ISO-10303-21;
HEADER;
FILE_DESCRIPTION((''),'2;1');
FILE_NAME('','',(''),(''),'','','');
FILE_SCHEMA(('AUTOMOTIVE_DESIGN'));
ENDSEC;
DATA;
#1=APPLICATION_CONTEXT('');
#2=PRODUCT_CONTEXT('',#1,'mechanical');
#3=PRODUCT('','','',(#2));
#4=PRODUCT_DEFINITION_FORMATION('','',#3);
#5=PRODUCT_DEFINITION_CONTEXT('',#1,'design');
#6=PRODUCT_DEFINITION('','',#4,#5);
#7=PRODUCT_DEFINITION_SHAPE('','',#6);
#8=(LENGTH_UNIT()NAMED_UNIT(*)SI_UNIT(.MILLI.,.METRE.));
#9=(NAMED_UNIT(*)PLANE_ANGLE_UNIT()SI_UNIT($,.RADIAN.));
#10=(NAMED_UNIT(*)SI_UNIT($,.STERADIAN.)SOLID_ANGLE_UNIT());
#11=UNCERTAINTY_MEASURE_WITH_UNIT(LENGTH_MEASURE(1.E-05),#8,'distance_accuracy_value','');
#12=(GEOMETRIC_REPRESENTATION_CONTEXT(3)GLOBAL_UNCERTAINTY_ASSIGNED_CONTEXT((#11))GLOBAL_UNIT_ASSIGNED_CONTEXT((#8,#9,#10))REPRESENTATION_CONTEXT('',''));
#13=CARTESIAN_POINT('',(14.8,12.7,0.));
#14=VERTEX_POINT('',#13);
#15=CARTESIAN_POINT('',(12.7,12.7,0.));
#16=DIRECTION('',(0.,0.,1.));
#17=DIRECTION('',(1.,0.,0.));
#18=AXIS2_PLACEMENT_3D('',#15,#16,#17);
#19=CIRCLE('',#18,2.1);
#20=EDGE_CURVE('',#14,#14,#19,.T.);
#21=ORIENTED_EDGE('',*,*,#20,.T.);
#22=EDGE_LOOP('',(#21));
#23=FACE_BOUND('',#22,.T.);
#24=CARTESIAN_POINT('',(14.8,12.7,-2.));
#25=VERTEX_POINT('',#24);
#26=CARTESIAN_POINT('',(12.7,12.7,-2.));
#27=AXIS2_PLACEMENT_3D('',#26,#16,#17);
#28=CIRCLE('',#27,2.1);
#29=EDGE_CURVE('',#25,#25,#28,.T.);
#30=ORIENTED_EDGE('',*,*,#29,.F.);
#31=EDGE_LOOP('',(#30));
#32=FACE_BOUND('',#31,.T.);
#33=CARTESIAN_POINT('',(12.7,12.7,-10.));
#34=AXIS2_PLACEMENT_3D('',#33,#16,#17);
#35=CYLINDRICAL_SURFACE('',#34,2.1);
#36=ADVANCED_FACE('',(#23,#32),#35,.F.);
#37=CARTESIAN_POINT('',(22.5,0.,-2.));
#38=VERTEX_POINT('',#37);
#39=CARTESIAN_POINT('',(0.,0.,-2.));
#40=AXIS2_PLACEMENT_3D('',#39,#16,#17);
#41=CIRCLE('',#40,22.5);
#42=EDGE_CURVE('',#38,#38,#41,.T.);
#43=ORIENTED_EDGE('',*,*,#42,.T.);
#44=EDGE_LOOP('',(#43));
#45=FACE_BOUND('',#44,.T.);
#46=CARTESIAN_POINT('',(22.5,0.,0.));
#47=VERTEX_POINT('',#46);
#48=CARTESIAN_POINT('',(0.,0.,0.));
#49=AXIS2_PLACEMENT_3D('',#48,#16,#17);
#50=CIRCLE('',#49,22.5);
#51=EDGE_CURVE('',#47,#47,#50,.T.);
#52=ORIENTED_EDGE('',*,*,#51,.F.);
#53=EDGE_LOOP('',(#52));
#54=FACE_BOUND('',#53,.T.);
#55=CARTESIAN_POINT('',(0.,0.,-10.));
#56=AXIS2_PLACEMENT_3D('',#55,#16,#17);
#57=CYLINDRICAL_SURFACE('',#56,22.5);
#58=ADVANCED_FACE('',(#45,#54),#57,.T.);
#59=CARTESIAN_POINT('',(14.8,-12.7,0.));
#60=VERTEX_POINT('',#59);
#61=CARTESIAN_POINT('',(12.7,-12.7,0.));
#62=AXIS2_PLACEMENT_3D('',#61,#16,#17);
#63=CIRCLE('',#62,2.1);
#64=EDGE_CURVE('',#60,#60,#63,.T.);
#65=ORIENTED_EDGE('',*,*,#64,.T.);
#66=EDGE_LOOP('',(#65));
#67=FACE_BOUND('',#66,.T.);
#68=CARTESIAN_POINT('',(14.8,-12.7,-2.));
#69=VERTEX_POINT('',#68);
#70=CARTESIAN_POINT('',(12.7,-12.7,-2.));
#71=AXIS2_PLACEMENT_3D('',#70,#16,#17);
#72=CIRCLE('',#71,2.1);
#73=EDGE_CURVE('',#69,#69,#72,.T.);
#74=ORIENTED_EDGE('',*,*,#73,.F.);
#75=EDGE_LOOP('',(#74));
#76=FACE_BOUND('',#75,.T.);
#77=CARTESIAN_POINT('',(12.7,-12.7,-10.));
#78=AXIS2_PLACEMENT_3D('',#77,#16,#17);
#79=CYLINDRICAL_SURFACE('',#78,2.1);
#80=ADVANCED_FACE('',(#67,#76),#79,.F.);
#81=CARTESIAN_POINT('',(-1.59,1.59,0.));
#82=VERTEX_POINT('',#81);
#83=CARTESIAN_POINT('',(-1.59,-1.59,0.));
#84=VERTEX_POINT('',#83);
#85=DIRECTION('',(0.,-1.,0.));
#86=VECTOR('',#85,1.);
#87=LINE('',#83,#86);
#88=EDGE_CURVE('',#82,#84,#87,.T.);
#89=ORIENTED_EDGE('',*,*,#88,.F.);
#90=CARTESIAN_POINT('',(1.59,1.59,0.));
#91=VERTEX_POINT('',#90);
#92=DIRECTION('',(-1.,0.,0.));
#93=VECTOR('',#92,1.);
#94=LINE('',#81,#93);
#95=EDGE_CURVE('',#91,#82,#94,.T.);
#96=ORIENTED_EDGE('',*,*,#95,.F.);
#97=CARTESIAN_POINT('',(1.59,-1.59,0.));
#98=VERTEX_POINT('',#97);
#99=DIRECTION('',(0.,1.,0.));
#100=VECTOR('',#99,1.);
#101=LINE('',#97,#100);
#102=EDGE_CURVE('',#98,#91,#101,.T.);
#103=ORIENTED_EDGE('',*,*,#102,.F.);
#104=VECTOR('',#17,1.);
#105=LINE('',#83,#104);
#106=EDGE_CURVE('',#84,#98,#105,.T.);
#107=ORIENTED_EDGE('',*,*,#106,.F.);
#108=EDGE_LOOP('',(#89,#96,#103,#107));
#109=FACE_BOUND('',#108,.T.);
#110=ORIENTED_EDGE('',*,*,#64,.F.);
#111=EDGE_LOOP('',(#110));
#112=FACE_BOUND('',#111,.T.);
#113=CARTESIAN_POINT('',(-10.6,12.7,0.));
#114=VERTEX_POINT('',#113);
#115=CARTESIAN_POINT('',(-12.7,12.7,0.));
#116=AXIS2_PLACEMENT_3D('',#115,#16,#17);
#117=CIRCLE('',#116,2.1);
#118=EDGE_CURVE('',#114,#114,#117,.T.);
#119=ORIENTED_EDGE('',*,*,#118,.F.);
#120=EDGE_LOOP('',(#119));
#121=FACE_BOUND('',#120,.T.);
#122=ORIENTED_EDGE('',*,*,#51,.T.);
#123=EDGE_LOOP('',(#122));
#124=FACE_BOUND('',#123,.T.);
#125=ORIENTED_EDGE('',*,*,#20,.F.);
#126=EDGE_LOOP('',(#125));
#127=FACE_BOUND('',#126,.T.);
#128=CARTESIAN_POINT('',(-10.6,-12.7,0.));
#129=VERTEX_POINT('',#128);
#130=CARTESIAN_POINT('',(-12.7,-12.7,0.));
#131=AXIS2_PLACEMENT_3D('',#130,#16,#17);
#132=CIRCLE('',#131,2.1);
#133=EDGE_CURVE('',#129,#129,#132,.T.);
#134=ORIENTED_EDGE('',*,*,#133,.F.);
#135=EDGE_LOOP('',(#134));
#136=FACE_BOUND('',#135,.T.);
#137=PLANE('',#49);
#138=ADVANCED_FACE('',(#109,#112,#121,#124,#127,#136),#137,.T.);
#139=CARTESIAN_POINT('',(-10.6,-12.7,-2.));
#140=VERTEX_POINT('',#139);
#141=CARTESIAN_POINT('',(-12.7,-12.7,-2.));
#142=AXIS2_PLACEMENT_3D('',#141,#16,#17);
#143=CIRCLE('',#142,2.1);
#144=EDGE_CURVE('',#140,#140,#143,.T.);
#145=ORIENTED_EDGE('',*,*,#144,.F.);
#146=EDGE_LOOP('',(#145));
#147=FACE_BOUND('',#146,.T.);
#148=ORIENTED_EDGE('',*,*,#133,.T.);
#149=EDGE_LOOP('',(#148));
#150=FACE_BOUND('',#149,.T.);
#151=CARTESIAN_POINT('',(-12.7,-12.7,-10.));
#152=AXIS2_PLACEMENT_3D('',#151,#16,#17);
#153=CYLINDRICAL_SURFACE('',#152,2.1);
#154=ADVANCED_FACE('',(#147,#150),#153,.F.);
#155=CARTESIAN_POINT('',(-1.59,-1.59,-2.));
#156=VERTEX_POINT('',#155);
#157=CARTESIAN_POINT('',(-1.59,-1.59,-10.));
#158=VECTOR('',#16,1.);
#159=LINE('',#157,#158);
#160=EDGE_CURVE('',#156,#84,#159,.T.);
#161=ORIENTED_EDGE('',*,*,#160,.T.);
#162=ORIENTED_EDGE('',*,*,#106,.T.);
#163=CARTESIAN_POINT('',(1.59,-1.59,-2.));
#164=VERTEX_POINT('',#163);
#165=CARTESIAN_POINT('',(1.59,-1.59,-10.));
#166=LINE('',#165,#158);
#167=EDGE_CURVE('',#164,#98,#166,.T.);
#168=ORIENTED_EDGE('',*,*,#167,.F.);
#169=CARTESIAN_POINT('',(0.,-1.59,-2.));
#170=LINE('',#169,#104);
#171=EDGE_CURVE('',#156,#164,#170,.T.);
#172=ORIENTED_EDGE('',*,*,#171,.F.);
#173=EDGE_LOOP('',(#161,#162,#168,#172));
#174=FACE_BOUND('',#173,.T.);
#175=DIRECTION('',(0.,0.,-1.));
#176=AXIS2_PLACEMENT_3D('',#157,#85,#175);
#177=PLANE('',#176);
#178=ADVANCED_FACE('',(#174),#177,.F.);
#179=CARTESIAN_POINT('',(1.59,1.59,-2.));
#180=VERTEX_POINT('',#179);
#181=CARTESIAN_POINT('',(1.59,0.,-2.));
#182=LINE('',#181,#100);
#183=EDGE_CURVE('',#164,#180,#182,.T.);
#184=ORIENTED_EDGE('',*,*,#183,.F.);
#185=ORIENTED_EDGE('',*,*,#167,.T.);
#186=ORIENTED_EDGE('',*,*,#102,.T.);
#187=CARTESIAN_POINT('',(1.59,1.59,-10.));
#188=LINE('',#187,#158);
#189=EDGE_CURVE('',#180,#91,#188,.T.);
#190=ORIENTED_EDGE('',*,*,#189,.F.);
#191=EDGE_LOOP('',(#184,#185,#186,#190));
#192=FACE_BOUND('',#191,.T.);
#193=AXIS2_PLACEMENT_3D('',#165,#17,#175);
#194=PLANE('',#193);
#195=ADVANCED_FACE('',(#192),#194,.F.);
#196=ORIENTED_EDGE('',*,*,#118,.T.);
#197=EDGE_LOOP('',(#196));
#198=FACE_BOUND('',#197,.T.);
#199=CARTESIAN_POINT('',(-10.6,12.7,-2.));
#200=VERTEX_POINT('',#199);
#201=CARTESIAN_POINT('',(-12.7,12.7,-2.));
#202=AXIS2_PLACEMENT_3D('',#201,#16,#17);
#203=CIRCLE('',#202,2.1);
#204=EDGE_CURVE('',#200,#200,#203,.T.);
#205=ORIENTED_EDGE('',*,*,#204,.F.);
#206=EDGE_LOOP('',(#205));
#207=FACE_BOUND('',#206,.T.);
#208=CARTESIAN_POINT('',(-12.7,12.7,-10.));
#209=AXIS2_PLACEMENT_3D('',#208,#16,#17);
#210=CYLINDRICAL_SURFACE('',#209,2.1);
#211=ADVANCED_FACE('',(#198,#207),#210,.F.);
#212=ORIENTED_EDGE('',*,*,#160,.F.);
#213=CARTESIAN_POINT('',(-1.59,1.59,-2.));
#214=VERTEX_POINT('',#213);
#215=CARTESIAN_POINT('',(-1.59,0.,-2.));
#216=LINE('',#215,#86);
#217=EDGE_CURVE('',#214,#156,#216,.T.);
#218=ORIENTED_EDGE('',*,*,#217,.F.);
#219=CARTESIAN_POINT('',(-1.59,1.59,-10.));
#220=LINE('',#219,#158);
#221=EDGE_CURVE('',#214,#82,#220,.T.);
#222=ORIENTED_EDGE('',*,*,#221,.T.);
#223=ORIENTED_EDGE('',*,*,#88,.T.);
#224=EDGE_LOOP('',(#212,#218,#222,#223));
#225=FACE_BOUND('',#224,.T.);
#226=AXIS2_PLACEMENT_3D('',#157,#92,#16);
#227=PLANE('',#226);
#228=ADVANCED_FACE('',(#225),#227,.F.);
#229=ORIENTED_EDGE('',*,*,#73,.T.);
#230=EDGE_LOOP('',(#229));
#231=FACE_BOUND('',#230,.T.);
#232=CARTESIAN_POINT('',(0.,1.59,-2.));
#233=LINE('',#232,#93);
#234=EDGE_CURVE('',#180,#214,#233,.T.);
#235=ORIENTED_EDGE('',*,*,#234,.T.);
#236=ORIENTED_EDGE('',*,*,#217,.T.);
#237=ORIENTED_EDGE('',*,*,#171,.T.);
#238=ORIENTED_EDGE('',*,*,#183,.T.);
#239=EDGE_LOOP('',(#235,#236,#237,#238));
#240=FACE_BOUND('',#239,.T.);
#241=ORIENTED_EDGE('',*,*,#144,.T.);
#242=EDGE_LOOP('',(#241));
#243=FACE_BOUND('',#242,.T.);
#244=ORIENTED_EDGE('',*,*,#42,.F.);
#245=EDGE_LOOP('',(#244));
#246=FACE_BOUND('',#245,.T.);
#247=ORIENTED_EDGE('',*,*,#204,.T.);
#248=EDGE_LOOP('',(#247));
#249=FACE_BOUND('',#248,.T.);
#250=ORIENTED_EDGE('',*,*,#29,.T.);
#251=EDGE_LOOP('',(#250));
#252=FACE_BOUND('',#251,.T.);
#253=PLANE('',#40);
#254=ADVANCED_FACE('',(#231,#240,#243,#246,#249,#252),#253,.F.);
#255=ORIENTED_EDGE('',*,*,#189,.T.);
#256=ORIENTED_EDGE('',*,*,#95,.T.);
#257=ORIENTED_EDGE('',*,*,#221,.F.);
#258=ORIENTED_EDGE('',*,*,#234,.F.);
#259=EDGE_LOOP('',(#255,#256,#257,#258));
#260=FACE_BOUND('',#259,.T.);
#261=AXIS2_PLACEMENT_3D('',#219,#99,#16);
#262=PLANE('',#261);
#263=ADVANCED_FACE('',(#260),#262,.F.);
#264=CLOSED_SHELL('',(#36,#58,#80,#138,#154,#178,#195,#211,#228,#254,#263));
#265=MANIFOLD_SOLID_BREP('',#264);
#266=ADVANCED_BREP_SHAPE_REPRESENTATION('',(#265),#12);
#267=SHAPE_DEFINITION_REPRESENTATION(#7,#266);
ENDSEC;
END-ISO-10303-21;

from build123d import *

# Parameters (mm, degrees)
SKETCH1_R          = 24
BASE_FLANGE1_DEPTH = 2
SKETCH6_R          = 2.1
SKETCH6_W          = 3.18
SKETCH6_H          = 3.18
CUT_EXTRUDE1_DEPTH = 10
SKETCH8_R          = 24
SKETCH8_R_2        = 22.5
CUT_EXTRUDE3_DEPTH = 10


# Sheet-metal steps are written as plain solids
with BuildPart() as part:
    # Sketch1 → Base-Flange1 (new body)
    with BuildSketch(Plane.XY):
        Circle(SKETCH1_R)
    extrude(amount=-BASE_FLANGE1_DEPTH)

    # Sketch6 → Cut-Extrude1 (cut)
    with BuildSketch(Plane.XY):
        with Locations((-12.7, 12.7)):
            Circle(SKETCH6_R)
        with Locations((12.7, 12.7)):
            Circle(SKETCH6_R)
        with Locations((12.7, -12.7)):
            Circle(SKETCH6_R)
        with Locations((-12.7, -12.7)):
            Circle(SKETCH6_R)
        Rectangle(SKETCH6_W, SKETCH6_H)
    extrude(amount=-CUT_EXTRUDE1_DEPTH, mode=Mode.SUBTRACT)

    # Sketch8 → Cut-Extrude3 (cut)
    with BuildSketch(Plane.XY):
        Circle(SKETCH8_R)
        Circle(SKETCH8_R_2, mode=Mode.SUBTRACT)
    extrude(amount=-CUT_EXTRUDE3_DEPTH, mode=Mode.SUBTRACT)


solid = part.part
